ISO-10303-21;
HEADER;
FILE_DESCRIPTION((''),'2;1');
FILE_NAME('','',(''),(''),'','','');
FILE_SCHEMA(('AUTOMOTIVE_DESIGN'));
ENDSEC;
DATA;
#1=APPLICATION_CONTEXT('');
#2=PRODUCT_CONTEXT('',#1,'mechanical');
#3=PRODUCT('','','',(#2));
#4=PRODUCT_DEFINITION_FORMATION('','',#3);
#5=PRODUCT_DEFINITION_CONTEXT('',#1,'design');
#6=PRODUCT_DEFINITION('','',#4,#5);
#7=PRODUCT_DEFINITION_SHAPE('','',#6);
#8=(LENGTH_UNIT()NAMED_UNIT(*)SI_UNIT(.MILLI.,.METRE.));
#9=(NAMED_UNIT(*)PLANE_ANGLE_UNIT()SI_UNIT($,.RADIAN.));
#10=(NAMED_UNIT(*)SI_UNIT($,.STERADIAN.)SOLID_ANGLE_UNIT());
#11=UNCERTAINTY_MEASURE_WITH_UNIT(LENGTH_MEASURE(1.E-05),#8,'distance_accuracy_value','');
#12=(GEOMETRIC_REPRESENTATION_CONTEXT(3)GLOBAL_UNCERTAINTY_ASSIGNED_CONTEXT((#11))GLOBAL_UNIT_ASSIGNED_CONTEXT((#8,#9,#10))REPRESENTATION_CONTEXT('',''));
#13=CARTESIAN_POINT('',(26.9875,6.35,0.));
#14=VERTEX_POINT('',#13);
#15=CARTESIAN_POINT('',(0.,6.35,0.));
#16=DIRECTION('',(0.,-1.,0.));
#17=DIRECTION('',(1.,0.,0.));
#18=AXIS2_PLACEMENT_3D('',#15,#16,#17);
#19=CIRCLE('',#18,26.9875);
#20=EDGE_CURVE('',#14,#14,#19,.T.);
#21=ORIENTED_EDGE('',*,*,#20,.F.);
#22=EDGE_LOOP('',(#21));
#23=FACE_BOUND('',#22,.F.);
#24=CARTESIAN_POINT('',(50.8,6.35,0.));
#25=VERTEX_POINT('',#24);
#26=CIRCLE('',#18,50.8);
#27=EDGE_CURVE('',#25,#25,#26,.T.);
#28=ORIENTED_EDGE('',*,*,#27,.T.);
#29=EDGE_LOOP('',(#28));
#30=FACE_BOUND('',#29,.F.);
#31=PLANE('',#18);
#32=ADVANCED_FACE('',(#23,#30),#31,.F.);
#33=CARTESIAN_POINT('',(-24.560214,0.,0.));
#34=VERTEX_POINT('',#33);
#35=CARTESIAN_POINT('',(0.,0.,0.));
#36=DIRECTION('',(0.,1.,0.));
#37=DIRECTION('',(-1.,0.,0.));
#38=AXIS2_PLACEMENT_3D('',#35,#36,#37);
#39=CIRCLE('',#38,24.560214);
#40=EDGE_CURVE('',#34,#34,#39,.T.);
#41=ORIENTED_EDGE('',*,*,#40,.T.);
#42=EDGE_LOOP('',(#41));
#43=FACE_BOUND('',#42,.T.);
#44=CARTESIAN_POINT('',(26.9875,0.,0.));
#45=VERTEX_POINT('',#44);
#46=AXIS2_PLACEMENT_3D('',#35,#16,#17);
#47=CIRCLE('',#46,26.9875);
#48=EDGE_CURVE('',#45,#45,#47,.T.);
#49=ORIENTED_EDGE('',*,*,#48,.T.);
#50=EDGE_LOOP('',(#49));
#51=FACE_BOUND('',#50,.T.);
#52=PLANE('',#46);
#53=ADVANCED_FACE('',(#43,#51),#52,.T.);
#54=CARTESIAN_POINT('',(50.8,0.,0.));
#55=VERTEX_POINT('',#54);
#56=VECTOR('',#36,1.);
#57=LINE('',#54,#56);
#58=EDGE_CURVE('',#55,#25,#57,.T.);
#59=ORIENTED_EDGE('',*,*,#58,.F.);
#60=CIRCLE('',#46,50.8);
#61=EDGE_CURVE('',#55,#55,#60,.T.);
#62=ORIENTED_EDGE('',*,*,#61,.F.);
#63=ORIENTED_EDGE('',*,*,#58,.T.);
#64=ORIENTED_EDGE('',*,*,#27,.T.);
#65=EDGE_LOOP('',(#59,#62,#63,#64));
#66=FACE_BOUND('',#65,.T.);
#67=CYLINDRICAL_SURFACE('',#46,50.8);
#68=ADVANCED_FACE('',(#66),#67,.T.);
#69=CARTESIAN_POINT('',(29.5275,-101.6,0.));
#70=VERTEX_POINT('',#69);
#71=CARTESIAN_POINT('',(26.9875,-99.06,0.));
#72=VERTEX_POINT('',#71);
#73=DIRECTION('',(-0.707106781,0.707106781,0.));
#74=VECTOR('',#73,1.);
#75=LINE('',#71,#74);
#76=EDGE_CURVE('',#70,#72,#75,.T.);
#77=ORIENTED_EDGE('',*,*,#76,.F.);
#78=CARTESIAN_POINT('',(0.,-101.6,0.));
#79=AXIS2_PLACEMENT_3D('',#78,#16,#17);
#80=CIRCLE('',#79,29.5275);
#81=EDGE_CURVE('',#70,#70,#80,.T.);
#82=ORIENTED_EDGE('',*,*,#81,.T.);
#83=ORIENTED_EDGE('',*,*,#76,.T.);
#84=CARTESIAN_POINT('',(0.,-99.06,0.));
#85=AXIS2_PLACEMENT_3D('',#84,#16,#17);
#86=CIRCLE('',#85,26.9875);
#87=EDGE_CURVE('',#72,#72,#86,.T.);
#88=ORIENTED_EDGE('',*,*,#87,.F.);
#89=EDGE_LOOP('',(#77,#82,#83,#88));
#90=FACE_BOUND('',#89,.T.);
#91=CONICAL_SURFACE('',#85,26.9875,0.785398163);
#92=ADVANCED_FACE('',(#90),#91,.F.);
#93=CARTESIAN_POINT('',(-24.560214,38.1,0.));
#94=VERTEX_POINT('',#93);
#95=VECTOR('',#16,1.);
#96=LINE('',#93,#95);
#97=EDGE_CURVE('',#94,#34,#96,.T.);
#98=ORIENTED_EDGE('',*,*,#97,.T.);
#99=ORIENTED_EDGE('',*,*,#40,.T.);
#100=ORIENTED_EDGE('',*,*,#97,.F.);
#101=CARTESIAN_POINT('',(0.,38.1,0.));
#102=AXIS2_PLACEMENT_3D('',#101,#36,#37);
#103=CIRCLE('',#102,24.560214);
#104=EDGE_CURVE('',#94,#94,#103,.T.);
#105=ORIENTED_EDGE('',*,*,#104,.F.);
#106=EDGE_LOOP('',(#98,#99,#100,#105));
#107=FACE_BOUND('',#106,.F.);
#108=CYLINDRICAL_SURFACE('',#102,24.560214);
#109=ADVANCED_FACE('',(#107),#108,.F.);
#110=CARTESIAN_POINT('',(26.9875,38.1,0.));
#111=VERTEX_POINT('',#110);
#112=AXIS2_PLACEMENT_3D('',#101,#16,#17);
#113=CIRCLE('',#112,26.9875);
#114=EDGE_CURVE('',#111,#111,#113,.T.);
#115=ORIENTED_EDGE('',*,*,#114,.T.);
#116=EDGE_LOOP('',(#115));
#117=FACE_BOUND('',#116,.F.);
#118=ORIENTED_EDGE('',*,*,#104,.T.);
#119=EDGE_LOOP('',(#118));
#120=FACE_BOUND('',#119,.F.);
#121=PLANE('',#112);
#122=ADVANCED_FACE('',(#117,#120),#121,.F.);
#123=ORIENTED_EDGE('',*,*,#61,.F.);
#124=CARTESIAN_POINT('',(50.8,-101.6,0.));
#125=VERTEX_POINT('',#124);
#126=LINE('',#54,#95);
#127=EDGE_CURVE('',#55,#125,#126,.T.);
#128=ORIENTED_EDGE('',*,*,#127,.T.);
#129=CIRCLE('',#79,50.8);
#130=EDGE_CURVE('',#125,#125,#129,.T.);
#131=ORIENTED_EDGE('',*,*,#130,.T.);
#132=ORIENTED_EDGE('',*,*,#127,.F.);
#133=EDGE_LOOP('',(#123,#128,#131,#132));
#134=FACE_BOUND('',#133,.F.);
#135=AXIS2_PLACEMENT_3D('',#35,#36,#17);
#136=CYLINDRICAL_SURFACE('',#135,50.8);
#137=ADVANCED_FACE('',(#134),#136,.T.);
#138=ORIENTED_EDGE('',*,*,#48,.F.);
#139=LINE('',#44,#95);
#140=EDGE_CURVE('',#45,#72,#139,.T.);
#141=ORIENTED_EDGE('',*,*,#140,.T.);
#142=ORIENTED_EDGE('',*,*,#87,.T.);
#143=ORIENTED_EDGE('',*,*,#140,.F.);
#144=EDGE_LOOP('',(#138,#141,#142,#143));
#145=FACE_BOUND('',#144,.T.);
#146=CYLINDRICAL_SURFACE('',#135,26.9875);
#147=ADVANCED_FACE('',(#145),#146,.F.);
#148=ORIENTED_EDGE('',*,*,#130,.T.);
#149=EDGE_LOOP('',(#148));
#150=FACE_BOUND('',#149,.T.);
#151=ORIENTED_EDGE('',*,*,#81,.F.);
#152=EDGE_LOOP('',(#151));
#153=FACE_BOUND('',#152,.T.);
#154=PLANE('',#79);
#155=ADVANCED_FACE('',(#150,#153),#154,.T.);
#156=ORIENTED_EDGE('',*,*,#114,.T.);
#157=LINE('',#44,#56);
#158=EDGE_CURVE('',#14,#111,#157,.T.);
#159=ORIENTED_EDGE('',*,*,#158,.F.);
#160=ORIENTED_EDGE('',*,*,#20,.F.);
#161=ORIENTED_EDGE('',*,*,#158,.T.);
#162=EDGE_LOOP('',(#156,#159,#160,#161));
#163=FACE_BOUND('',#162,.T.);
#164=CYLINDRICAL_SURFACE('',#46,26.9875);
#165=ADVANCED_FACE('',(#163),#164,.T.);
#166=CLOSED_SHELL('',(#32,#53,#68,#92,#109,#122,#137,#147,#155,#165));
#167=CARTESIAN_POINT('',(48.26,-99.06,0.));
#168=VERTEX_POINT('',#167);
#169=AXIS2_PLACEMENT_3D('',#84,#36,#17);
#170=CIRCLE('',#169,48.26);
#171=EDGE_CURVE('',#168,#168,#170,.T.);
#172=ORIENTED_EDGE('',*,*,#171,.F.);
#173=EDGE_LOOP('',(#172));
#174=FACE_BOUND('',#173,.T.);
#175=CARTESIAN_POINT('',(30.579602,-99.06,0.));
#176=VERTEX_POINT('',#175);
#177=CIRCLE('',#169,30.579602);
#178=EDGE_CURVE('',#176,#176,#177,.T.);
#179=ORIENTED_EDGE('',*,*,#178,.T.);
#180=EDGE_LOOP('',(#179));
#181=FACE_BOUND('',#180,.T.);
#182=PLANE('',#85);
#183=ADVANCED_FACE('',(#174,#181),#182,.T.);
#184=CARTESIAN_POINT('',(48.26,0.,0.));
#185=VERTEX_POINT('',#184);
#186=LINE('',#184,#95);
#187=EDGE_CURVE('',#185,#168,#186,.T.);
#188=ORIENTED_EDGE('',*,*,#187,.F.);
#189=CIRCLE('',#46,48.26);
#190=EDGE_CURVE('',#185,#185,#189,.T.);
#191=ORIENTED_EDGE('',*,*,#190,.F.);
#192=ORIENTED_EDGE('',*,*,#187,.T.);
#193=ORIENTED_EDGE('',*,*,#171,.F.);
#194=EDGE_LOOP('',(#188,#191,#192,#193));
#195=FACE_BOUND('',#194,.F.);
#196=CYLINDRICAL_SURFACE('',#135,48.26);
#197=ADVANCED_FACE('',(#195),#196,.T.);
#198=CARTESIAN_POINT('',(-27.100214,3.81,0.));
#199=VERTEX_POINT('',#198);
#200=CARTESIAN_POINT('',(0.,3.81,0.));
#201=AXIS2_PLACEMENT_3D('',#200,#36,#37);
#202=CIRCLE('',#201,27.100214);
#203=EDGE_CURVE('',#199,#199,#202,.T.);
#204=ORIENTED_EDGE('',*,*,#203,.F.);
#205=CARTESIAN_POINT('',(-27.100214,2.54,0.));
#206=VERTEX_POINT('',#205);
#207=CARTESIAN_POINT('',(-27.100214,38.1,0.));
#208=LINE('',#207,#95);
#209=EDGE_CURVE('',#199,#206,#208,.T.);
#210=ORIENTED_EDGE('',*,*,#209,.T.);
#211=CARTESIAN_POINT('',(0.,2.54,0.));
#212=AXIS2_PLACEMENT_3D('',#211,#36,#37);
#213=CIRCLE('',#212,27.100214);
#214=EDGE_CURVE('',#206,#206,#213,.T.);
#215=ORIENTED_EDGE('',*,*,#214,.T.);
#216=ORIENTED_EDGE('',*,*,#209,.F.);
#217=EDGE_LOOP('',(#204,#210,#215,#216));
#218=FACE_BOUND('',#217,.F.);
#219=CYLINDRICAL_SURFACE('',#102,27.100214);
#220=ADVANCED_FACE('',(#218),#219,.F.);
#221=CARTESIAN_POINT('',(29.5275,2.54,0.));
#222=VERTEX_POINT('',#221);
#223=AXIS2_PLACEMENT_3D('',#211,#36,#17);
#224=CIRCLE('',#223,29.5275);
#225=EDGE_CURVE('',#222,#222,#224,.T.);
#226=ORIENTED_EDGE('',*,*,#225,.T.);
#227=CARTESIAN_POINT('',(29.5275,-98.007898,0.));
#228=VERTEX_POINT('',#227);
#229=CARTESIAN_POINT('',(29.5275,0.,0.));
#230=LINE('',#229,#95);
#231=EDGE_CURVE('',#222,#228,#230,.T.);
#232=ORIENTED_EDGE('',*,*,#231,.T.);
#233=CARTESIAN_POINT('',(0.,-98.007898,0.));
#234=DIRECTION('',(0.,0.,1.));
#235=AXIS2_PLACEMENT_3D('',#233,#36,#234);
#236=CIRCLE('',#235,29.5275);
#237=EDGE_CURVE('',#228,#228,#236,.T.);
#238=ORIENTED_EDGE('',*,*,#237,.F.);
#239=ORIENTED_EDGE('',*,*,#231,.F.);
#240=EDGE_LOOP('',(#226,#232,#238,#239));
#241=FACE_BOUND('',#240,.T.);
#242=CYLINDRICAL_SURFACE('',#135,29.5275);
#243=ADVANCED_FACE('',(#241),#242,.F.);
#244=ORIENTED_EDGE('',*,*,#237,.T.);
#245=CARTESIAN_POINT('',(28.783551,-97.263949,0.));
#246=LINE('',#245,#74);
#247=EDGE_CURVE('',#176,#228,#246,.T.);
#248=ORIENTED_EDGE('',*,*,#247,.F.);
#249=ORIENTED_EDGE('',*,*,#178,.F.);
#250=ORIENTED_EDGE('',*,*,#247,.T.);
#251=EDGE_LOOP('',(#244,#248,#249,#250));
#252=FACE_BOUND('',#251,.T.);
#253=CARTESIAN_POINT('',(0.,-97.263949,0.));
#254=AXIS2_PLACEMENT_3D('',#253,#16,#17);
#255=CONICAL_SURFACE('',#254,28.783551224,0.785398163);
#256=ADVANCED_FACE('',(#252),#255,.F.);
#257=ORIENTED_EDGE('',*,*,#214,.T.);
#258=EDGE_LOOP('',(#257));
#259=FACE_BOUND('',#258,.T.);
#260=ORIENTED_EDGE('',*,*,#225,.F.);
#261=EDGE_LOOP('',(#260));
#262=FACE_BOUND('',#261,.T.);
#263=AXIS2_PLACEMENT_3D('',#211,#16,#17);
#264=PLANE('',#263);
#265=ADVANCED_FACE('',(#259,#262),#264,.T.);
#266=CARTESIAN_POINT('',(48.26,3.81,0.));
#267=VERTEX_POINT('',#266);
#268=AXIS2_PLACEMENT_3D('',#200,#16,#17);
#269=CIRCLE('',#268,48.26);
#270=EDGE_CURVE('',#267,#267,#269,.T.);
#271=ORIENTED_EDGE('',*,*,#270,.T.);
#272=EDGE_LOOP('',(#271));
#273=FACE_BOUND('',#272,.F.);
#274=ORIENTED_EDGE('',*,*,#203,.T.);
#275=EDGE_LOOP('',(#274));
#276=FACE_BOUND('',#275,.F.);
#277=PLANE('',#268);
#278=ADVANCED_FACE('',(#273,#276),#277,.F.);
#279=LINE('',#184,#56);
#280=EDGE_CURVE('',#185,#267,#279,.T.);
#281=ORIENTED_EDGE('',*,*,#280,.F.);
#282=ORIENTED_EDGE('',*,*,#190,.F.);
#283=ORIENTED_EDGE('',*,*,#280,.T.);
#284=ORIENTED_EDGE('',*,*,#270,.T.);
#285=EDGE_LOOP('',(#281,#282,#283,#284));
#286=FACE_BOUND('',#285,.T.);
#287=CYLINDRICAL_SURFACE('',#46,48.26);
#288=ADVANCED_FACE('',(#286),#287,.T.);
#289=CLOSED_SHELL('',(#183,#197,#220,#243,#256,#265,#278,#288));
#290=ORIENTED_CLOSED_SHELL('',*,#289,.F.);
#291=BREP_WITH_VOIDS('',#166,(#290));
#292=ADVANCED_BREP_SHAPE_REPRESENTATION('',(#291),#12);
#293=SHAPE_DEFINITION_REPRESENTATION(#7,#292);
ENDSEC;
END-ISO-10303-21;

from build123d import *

# Parameters (mm, degrees)
F0_R     = 26.9875
F1_DEPTH = 38.1
F0_R_2   = 50.8
F2_DEPTH = 6.35
F3_DEPTH = 101.6
F4_R     = 24.5602140896
F5_DEPTH = 127
F6_SIZE2 = 2.54
F6_SIZE  = 2.54
F7_T     = -2.54


# Not quite as in the source:
# - a feature names something its author has since deleted; it is built from what else it names


with BuildPart() as f1:
    # F0 (on Front) → F1 (new body)
    with BuildSketch(Plane.XZ):
        Circle(F0_R)
    extrude(amount=-F1_DEPTH)

    # F0 (on Front) → F2 (join)
    with BuildSketch(Plane.XZ):
        Circle(F0_R_2)
        Circle(F0_R, mode=Mode.SUBTRACT)
    extrude(amount=-F2_DEPTH)

    # F0 (on Front) → F3 (join)
    with BuildSketch(Plane.XZ):
        Circle(F0_R_2)
        Circle(F0_R, mode=Mode.SUBTRACT)
    extrude(amount=F3_DEPTH)

    # F4 (on face) → F5 (cut)
    with BuildSketch(Plane(origin=(0, 38.1, 0), x_dir=(-1, 0, 0), z_dir=(0, 1, 0))):
        Circle(F4_R)
    extrude(amount=-F5_DEPTH, mode=Mode.SUBTRACT)

    # F6
    f6_edges = [f1.edges().sort_by_distance(p)[0] for p in [
        (-26.9875, -101.6, 0),
    ]]
    chamfer(f6_edges, length=F6_SIZE, length2=F6_SIZE2)

    # F7 (hollow: no face is removed)
    offset(amount=F7_T, kind=Kind.INTERSECTION, mode=Mode.SUBTRACT)


solid = f1.part
